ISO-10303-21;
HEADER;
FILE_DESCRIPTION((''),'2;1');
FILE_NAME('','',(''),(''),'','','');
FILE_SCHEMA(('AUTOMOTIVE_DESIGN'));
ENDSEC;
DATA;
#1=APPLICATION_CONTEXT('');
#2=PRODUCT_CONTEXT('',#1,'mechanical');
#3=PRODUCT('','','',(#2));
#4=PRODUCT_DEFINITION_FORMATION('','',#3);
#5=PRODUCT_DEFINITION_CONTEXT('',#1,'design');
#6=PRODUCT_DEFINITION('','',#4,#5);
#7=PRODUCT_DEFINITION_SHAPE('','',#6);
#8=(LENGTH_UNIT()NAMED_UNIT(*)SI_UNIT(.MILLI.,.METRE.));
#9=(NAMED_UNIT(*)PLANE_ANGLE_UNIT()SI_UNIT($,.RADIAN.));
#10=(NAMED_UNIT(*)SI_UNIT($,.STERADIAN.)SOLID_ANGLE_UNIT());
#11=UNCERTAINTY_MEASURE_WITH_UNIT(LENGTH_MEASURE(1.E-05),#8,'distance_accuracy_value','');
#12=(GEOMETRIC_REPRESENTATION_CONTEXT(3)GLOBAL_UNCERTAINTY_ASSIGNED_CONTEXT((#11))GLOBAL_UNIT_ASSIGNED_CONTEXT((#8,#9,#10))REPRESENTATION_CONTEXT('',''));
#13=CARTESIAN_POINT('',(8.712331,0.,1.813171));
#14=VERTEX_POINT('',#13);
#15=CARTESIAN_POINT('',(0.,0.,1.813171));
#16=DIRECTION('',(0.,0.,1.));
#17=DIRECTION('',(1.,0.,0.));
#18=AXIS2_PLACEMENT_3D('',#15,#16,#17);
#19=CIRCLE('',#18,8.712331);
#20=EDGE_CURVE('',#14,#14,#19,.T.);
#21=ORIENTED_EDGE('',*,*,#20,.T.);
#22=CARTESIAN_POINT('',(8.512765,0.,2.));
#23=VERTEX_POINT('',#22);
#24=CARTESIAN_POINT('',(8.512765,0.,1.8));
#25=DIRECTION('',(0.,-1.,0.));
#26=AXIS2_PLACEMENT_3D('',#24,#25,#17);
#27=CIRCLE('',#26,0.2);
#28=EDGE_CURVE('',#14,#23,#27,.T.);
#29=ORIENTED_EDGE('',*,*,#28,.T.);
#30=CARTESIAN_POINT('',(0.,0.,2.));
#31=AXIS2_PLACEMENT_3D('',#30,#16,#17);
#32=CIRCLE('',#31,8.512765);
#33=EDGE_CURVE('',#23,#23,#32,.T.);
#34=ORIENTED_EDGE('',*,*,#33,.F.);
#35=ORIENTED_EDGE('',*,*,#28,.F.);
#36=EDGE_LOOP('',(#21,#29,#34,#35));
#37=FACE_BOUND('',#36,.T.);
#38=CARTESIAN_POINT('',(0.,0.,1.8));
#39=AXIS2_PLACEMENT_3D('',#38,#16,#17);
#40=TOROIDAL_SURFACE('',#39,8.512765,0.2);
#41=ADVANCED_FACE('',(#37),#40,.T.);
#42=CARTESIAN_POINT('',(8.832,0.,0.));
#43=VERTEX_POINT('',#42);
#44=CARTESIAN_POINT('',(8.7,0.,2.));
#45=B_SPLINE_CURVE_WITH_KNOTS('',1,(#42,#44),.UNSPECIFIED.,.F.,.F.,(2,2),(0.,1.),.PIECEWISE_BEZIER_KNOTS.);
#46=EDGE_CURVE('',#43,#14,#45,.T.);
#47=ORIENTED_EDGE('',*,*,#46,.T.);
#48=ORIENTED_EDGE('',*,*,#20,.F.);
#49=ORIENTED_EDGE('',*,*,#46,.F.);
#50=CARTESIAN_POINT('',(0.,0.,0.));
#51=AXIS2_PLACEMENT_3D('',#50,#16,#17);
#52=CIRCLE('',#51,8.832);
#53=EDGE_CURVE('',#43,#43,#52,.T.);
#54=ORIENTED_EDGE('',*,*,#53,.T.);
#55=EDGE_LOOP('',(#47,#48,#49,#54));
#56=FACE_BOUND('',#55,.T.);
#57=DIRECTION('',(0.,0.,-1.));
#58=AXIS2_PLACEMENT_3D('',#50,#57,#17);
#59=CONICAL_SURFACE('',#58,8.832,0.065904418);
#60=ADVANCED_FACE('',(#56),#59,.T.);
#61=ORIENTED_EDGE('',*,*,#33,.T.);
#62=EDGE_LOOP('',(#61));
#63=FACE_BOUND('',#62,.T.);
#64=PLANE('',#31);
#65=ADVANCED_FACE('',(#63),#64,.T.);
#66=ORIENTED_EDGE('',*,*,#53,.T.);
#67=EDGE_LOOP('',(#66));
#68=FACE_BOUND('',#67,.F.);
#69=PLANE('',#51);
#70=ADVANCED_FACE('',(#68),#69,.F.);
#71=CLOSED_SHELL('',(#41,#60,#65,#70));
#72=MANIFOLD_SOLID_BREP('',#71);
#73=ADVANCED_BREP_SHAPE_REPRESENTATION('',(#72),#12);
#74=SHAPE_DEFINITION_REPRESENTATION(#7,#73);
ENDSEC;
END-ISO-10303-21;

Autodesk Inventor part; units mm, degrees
ref_plane "YZ Plane" through (0, 0, 0) normal (1, 0, 0) x (0, 1, 0)
ref_plane "XZ Plane" through (0, 0, 0) normal (0, 1, 0) x (-1, 0, 0)
sketch "Sketch1" plane through (0, 0, 0) normal (0, 0, 1) x (1, 0, 0)
  circle A0 centre (0, 0) radius 8.832
  dimension "d0" = 17.664
ref_plane "Work Plane1" through (0, 0, 2) normal (0, 0, 1) x (1, 0, 0)
sketch "Sketch2" plane through (0, 0, 2) normal (0, 0, 1) x (1, 0, 0)
  circle A0 centre (0, 0) radius 8.7
  dimension "d2" = 17.4
loft "Loft1" add profiles "Sketch1", "Sketch2"
fillet "Fillet1" radius 0.2 1 edges at (-8.7, 0, 2)
properties part number "Knob (tampa)"
